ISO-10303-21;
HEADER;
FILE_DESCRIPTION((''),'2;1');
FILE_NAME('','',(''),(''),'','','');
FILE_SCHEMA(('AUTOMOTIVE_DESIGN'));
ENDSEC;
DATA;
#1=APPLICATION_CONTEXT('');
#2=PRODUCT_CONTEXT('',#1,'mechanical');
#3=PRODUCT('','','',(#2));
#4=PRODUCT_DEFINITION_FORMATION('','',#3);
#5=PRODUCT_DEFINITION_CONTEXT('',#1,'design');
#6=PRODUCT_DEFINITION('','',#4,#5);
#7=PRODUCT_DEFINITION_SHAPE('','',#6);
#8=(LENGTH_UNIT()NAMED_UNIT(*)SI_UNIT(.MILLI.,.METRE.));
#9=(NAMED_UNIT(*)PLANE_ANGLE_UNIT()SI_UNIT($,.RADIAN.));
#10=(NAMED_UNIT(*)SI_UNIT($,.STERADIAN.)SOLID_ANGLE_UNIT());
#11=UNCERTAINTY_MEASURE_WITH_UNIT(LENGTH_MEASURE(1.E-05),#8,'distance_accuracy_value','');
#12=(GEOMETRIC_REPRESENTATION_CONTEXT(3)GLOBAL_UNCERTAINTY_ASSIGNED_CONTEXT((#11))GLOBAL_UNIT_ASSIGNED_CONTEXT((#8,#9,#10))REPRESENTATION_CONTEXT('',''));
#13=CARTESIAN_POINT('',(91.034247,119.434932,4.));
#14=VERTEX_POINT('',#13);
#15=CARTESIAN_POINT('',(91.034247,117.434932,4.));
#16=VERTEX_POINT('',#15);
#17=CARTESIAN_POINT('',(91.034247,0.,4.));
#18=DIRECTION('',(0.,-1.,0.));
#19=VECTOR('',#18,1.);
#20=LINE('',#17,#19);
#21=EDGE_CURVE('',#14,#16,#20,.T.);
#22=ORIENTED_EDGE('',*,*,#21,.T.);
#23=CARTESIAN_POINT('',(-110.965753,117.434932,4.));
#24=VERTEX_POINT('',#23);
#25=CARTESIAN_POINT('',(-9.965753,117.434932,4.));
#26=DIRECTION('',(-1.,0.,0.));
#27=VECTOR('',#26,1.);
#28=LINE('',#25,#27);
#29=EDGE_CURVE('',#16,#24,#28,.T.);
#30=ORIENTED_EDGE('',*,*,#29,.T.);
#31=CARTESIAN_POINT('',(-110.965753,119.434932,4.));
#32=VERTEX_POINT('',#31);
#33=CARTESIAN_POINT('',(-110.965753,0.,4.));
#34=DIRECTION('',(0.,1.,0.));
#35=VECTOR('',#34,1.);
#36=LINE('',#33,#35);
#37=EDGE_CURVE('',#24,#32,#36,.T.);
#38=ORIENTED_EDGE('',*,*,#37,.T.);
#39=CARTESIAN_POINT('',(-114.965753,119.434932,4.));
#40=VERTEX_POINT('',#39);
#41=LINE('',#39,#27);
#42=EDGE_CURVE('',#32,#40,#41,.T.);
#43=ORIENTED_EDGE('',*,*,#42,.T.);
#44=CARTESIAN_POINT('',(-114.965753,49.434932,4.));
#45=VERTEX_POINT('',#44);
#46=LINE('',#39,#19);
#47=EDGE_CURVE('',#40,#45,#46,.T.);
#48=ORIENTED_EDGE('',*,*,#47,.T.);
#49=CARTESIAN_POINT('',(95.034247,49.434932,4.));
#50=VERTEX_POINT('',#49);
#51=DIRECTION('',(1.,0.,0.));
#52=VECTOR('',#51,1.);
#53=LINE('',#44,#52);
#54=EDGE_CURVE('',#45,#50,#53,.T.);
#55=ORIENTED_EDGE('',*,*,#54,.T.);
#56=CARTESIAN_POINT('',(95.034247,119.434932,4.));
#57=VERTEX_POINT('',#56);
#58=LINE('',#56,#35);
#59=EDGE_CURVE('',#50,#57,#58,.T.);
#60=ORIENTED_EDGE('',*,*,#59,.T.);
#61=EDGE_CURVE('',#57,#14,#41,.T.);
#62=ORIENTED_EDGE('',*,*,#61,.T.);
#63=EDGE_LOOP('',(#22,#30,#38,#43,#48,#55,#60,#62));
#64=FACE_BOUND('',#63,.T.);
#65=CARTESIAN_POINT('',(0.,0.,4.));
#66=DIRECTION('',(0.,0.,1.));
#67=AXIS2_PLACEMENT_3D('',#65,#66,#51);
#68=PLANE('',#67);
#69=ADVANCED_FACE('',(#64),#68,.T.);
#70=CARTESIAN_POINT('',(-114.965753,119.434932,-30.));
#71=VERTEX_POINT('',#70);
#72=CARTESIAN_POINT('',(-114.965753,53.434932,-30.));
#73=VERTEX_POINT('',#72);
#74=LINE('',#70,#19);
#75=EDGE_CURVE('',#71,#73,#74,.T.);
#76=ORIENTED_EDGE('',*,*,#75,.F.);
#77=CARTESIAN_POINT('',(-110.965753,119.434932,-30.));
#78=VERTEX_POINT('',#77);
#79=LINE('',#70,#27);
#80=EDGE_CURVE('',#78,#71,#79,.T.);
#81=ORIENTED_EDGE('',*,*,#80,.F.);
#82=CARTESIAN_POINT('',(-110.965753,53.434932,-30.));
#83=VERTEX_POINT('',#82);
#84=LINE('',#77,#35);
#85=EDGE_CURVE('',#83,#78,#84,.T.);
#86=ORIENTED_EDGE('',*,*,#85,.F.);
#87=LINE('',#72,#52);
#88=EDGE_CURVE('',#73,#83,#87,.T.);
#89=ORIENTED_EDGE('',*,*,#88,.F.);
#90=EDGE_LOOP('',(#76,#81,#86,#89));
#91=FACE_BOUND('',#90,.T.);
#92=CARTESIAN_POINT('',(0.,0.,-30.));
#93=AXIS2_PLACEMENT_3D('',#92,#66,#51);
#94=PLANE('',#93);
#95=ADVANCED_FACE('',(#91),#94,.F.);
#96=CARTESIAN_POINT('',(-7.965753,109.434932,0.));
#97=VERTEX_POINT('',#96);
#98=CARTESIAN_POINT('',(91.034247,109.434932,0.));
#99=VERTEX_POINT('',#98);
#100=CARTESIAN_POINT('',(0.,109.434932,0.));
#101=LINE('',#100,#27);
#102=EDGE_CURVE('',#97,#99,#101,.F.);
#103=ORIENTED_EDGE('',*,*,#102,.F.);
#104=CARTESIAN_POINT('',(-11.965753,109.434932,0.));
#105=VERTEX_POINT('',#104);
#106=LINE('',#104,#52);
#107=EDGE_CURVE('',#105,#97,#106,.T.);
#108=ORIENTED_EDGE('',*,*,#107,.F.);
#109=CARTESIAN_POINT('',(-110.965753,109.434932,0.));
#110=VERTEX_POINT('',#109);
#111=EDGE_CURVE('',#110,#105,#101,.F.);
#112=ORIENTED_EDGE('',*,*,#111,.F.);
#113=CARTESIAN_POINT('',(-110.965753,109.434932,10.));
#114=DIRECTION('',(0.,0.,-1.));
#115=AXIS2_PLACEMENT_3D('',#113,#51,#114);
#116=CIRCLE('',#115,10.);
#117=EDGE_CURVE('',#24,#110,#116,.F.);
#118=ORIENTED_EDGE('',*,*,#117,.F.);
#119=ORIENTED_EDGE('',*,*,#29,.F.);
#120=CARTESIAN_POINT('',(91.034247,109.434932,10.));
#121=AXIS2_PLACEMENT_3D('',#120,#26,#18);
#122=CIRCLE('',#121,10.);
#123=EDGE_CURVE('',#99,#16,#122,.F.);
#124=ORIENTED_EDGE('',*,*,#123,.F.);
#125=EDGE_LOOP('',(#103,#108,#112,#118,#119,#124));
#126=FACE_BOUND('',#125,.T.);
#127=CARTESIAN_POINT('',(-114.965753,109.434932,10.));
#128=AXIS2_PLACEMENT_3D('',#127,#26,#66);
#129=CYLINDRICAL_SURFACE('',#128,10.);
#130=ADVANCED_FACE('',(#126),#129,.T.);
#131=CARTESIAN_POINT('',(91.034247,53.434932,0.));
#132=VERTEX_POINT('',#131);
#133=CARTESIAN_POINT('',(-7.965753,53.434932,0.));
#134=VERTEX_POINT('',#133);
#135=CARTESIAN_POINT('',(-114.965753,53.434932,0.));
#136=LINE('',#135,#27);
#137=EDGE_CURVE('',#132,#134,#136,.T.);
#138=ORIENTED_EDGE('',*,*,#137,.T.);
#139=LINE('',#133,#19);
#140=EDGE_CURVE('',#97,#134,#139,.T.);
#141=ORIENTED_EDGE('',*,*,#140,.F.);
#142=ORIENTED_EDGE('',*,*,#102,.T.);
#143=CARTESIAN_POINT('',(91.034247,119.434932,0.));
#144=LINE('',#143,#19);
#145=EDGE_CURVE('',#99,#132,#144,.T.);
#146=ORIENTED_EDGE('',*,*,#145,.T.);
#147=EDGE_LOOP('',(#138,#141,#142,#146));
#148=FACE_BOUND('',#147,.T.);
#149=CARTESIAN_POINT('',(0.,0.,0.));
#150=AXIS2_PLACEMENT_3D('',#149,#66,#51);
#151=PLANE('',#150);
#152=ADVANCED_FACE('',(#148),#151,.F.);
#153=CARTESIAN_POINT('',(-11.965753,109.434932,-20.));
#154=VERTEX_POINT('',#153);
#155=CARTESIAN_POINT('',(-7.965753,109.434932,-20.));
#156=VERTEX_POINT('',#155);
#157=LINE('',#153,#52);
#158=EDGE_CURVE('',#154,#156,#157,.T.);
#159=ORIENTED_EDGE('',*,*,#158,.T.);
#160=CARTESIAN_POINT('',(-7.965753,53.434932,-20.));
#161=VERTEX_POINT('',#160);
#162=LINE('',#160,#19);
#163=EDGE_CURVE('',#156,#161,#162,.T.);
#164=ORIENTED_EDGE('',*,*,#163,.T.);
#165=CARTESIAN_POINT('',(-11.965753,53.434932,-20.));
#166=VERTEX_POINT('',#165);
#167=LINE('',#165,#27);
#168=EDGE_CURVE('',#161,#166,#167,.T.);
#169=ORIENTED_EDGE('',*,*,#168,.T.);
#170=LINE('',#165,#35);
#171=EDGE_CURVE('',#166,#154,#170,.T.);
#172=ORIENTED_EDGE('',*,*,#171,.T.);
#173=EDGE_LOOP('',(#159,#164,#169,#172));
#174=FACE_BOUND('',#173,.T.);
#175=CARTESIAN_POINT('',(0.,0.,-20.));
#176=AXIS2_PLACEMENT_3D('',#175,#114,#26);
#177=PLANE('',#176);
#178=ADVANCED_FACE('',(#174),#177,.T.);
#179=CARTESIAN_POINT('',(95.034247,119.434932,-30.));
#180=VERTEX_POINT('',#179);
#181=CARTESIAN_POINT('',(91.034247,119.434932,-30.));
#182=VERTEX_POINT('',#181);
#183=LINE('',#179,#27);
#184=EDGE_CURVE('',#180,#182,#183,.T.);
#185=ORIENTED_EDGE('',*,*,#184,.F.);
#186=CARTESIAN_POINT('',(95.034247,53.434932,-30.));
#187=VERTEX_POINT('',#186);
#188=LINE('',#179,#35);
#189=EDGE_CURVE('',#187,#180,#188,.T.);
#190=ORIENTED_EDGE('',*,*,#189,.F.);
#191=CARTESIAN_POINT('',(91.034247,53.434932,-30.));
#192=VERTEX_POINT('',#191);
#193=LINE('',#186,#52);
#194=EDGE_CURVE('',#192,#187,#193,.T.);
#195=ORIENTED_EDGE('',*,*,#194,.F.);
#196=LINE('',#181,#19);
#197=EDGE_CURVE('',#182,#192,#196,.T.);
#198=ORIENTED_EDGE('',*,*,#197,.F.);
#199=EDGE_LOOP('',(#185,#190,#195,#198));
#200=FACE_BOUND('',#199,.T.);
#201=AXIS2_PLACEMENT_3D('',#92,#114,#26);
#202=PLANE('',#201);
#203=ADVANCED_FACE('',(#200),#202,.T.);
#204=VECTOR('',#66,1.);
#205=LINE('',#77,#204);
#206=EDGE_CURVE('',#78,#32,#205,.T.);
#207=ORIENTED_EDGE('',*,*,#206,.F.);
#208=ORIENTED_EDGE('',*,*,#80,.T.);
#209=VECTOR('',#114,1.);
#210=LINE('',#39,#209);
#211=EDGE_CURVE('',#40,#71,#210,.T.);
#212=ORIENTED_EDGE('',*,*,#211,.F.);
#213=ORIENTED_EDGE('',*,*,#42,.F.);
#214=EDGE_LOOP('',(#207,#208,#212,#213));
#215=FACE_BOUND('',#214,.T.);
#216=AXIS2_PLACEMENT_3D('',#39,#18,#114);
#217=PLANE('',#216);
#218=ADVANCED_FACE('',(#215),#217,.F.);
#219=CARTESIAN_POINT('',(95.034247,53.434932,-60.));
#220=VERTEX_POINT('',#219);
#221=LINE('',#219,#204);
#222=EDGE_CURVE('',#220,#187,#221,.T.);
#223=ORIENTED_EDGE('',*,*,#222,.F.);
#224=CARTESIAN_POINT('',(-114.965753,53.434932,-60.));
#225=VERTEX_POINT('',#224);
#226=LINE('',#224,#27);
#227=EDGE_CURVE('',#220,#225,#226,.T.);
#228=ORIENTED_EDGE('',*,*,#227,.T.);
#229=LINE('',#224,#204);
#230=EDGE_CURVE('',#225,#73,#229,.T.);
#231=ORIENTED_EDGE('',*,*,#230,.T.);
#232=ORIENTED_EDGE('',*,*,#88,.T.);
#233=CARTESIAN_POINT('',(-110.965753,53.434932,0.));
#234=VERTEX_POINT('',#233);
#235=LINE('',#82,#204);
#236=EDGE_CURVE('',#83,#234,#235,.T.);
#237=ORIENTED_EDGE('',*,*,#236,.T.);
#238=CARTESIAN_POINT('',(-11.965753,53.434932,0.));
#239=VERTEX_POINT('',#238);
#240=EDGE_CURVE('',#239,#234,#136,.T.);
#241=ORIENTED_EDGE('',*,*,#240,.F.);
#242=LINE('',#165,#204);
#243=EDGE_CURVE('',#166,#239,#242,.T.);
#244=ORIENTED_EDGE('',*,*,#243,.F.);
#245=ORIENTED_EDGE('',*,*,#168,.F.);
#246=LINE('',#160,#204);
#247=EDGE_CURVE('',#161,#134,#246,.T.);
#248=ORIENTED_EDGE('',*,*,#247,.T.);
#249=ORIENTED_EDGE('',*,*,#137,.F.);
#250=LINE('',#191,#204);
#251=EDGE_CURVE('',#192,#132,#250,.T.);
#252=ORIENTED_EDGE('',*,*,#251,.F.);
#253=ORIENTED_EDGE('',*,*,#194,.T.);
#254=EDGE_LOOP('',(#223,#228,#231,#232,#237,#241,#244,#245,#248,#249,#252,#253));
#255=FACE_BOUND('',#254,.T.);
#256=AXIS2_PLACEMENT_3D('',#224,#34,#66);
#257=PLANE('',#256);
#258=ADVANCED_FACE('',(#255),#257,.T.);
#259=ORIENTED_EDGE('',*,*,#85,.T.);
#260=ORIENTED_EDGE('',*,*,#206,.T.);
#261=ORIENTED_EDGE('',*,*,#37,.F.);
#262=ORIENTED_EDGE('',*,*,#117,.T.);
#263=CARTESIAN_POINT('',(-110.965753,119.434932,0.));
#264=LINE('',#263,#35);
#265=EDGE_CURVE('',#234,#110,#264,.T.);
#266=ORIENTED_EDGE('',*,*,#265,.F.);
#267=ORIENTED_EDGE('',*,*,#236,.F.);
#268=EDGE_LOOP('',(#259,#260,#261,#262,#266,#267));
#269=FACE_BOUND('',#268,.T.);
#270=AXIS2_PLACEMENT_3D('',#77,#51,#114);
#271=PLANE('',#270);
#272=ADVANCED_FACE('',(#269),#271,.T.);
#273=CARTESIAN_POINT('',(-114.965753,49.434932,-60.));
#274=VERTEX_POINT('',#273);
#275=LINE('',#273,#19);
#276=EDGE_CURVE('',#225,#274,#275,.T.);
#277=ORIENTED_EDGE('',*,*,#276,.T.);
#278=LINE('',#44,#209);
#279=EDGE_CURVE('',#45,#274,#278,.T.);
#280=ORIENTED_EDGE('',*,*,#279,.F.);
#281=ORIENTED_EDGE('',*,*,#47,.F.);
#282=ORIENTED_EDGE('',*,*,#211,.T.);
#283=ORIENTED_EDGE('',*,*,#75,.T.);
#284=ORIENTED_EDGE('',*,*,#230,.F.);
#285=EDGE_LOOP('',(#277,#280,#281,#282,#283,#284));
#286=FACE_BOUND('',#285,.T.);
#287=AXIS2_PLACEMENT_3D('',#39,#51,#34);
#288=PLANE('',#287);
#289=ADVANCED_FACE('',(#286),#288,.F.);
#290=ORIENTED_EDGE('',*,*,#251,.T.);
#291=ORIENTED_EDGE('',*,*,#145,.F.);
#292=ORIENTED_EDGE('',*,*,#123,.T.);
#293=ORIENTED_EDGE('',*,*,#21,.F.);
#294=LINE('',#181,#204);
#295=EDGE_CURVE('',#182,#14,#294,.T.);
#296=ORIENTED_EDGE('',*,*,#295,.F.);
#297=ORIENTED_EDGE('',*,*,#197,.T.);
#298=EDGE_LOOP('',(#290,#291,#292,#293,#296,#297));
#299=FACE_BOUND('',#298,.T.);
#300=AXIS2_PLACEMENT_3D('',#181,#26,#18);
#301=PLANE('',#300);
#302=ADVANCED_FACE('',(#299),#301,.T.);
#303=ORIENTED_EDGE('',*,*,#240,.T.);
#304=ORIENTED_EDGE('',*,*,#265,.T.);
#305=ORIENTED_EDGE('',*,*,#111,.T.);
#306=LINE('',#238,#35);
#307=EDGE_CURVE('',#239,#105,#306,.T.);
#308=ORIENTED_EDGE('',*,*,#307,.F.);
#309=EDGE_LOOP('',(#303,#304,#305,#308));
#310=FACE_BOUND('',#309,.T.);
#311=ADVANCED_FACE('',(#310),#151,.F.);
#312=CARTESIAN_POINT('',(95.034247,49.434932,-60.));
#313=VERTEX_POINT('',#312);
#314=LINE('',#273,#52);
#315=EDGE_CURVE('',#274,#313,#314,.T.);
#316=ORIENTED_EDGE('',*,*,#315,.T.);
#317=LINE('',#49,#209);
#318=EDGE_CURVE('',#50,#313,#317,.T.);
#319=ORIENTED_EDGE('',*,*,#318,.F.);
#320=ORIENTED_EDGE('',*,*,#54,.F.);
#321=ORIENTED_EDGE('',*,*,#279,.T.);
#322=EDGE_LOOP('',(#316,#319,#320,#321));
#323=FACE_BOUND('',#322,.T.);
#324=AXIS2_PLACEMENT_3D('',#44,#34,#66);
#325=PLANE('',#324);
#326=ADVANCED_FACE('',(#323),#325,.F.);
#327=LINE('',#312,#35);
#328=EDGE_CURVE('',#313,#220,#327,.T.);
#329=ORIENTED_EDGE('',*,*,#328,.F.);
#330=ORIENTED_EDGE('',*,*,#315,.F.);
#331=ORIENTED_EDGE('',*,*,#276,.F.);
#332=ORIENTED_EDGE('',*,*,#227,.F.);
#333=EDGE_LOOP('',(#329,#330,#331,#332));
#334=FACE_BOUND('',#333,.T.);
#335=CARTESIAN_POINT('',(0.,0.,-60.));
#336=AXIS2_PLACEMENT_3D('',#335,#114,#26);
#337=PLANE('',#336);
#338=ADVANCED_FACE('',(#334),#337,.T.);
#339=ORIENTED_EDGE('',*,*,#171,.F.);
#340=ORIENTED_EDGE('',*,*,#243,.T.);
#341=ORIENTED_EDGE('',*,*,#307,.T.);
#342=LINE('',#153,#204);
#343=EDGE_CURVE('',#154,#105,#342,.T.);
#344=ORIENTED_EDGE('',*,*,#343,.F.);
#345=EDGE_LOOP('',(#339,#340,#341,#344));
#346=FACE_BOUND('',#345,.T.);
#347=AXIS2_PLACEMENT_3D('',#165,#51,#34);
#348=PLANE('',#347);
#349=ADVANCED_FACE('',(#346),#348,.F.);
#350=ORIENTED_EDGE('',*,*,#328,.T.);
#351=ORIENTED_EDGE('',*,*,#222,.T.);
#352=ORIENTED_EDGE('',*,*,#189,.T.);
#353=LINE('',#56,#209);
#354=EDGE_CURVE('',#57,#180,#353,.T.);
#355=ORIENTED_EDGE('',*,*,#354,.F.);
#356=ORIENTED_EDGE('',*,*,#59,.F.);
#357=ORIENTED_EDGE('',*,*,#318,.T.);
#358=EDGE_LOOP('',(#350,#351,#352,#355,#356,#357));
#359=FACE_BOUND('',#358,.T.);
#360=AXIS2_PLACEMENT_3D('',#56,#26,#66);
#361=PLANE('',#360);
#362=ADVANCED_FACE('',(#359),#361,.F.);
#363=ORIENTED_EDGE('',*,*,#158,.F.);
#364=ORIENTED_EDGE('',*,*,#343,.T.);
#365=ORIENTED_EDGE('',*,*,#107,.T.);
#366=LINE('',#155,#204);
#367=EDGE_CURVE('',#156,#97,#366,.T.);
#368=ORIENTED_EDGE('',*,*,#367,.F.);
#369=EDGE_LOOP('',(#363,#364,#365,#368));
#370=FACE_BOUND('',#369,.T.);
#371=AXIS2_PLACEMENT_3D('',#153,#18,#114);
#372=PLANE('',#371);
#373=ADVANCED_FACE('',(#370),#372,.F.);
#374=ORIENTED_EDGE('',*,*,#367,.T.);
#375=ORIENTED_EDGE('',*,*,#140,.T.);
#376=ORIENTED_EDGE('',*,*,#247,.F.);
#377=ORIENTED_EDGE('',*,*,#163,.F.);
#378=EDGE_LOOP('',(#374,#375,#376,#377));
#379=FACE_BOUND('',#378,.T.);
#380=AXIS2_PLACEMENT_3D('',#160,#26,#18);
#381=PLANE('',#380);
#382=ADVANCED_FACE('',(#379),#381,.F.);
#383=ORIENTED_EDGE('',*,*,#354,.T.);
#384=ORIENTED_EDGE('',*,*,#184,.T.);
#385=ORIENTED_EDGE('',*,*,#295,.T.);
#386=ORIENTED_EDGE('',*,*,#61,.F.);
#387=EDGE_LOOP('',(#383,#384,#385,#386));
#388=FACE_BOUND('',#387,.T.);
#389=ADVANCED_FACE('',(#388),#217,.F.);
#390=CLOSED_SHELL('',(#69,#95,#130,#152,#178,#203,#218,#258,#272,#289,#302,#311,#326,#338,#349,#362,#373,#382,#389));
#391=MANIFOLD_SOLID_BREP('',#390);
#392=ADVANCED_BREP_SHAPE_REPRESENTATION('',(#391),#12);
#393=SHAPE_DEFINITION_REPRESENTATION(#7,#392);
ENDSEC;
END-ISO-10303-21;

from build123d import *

# Parameters (mm, degrees)
SKETCH1_W           = 210
SKETCH1_H           = 70
BOSS_EXTRUDE1_DEPTH = 4
SKETCH2_W           = 210
SKETCH2_H           = 4
BOSS_EXTRUDE2_DEPTH = 60
SKETCH3_W           = 4
SKETCH3_H           = 66
BOSS_EXTRUDE3_DEPTH = 30
FILLET1_R           = 10
SKETCH5_W           = 4
SKETCH5_H           = 56
BOSS_EXTRUDE4_DEPTH = 20


with BuildPart() as part:
    # Sketch1 → Boss-Extrude1 (new body)
    with BuildSketch(Plane.XY):
        with Locations((-9.965753425, 84.434931507)):
            Rectangle(SKETCH1_W, SKETCH1_H)
    extrude(amount=BOSS_EXTRUDE1_DEPTH)

    # Sketch2 → Boss-Extrude2 (add)
    with BuildSketch(Plane.XY):
        with Locations((-9.965753425, 51.434931507)):
            Rectangle(SKETCH2_W, SKETCH2_H)
    extrude(amount=-BOSS_EXTRUDE2_DEPTH)

    # Sketch3 → Boss-Extrude3 (add)
    with BuildSketch(Plane.XY):
        with Locations((-112.965753425, 86.434931507)):
            Rectangle(SKETCH3_W, SKETCH3_H)
        with Locations((93.034246575, 86.434931507)):
            Rectangle(SKETCH3_W, SKETCH3_H)
    extrude(amount=-BOSS_EXTRUDE3_DEPTH)

    # Fillet1
    # the kernel refuses this fillet: 10 mm, written as the material it takes off along each edge
    with BuildSketch(Plane(origin=(-110.965753425, 119.434931507, 0), x_dir=(0, 0, 1), z_dir=(1, 0, 0))) as fillet1_piece_1:
        with BuildLine():
            CenterArc((FILLET1_R, FILLET1_R), FILLET1_R, 180, 90)
            Line((0, FILLET1_R), (0, 0))
            Line((0, 0), (FILLET1_R, 0))
        make_face()
    extrude(amount=202, mode=Mode.SUBTRACT)

    # Sketch5 → Boss-Extrude4 (add)
    with BuildSketch(Plane(origin=(0, 0, 0), x_dir=(-1, 0, 0), z_dir=(0, 0, -1))):
        with Locations((9.965753425, 81.434931507)):
            Rectangle(SKETCH5_W, SKETCH5_H)
    extrude(amount=BOSS_EXTRUDE4_DEPTH)


solid = part.part
